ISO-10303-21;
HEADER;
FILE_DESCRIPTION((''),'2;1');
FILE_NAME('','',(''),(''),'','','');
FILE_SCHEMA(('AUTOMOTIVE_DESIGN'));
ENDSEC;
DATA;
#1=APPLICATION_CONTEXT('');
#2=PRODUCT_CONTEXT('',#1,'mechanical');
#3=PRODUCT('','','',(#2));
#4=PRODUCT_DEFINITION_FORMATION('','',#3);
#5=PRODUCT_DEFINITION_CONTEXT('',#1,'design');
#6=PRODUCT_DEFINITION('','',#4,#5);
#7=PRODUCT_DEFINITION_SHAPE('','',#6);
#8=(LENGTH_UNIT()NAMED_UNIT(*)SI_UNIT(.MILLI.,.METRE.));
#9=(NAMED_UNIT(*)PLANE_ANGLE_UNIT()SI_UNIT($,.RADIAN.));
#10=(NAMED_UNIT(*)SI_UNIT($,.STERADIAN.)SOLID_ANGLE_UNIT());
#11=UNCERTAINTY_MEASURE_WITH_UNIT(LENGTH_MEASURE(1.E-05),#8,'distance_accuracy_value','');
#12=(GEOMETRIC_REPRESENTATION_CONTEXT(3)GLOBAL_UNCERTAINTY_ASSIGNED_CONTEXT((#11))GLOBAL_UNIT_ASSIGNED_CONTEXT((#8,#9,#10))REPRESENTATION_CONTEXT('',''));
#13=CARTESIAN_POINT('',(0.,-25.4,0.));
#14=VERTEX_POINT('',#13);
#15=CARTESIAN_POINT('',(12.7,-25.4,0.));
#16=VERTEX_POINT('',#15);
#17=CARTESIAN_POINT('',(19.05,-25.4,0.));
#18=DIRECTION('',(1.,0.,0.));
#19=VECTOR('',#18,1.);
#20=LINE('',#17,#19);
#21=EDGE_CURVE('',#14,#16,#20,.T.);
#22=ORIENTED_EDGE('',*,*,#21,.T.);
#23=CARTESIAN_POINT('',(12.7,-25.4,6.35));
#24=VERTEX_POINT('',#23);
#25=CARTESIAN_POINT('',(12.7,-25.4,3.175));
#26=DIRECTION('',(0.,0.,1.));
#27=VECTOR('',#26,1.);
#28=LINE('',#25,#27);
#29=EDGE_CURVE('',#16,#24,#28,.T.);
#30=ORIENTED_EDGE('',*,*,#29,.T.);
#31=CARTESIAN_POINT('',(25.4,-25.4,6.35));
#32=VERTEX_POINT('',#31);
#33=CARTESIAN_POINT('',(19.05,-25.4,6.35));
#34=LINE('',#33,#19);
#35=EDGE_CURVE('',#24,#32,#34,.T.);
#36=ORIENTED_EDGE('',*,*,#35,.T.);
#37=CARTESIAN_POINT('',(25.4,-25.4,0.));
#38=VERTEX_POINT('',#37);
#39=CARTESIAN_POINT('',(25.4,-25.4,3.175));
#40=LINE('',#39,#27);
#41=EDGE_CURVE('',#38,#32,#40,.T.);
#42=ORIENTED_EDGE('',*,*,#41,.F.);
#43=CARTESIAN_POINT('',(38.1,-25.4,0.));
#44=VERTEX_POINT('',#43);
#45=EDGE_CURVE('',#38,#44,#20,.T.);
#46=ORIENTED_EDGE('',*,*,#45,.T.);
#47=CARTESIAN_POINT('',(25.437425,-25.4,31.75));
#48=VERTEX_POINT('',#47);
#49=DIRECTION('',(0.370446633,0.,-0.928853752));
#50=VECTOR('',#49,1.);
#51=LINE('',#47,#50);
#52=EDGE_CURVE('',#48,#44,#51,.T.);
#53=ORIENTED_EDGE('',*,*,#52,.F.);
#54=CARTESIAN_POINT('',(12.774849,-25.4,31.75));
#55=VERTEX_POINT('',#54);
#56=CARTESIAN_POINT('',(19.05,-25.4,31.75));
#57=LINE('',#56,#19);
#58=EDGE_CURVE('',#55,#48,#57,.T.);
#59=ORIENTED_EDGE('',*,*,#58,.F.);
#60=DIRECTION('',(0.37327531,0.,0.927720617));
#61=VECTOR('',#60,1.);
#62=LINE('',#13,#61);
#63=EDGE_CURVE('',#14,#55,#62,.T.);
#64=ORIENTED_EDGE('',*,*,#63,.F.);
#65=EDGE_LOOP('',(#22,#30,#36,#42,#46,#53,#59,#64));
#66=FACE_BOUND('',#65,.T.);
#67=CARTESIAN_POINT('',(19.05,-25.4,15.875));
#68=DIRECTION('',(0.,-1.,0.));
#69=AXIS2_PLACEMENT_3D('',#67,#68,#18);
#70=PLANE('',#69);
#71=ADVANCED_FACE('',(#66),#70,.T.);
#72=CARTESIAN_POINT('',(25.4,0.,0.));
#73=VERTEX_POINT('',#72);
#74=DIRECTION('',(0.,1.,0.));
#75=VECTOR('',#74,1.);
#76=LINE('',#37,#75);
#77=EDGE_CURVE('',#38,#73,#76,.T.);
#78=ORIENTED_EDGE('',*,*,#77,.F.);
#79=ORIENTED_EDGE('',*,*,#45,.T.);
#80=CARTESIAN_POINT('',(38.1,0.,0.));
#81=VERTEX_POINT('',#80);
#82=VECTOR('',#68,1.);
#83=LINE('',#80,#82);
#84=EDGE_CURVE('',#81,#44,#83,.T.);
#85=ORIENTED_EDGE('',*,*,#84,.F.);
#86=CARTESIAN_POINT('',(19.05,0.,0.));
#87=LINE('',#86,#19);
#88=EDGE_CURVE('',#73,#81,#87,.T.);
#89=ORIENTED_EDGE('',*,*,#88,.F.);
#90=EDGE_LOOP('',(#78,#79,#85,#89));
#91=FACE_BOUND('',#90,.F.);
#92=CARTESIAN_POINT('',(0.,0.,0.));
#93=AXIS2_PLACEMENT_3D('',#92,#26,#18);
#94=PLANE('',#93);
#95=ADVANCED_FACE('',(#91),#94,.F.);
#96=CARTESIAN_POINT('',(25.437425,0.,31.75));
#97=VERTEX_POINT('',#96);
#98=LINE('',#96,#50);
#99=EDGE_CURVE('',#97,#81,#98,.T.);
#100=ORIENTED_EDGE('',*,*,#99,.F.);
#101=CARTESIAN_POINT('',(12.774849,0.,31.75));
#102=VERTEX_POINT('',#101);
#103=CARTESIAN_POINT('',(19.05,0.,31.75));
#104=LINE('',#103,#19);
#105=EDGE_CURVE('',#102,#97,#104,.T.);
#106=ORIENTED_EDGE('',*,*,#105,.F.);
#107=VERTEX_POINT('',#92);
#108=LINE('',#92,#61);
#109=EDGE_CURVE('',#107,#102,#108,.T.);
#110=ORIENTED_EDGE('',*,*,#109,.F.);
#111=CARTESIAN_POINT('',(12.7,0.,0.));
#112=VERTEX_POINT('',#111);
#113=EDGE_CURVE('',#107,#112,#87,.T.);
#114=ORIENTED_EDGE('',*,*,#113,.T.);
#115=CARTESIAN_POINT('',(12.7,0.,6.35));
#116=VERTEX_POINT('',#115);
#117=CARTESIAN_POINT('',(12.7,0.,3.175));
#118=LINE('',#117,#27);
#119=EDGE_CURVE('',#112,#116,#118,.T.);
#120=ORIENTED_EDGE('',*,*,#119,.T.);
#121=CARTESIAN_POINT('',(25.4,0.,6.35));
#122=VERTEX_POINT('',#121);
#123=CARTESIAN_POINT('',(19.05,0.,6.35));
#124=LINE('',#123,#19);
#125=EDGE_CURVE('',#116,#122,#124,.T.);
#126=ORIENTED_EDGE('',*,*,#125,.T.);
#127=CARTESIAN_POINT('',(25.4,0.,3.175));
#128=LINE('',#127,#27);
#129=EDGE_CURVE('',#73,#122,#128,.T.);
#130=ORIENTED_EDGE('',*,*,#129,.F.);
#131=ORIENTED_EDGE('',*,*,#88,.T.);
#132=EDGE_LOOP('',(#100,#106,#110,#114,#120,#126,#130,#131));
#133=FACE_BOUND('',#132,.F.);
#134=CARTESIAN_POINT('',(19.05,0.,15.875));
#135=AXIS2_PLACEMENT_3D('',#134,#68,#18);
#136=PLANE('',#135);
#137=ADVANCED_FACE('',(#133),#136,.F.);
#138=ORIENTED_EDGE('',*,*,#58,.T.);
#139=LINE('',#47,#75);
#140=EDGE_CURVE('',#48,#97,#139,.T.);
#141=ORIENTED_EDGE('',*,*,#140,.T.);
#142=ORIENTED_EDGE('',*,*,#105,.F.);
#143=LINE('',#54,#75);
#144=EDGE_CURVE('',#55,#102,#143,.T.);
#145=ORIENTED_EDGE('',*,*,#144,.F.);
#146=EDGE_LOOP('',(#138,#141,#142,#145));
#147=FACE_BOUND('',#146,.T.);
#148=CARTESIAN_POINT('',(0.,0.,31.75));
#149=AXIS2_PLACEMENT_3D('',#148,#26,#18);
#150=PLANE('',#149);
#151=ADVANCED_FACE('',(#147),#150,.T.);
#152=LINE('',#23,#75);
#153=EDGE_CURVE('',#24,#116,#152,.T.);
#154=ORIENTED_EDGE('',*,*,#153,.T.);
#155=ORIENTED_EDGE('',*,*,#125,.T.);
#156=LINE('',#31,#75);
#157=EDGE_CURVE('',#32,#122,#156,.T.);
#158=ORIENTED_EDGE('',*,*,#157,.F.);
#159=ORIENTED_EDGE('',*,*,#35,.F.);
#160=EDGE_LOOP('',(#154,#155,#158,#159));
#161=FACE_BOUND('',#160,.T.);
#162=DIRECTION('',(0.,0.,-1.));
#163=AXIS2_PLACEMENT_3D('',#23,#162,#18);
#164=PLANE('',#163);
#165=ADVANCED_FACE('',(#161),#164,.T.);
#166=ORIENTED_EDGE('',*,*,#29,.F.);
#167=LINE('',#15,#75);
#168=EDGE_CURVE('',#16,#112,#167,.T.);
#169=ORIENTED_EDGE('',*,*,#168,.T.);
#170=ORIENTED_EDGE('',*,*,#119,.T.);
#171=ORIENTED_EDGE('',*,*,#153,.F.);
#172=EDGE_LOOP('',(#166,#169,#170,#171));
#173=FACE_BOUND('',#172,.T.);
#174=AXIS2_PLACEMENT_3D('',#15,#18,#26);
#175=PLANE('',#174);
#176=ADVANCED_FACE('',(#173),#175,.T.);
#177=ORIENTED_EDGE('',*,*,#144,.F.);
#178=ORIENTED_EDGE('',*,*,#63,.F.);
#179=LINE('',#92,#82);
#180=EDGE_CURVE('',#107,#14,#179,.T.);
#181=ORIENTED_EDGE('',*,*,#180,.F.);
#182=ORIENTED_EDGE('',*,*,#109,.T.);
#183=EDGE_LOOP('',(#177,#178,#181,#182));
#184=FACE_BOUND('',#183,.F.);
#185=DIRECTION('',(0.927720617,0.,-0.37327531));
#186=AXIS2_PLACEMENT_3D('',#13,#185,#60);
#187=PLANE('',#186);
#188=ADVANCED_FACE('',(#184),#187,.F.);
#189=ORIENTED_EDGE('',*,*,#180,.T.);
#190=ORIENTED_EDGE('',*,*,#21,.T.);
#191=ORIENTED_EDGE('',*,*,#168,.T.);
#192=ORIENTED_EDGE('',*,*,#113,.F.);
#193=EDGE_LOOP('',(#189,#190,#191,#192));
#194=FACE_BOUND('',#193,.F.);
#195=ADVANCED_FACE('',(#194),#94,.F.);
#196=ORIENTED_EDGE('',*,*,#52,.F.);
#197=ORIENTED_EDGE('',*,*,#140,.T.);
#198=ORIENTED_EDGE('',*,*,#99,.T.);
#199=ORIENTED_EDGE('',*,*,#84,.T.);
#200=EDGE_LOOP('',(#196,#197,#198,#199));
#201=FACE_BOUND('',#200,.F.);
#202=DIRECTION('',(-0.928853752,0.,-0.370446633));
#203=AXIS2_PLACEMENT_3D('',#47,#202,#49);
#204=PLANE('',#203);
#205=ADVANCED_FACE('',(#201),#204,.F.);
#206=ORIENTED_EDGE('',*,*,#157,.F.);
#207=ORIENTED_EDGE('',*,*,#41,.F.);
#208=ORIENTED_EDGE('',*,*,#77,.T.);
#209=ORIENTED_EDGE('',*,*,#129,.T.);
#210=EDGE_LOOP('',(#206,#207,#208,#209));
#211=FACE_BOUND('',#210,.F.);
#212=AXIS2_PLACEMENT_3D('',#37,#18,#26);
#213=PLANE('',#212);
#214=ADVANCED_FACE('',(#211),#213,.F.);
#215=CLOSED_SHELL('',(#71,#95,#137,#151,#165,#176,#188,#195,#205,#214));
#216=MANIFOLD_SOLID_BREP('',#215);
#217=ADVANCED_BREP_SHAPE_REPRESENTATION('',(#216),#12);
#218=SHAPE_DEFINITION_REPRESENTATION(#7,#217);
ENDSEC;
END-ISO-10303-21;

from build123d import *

# Parameters (mm, degrees)
F0_W      = 38.1
F0_H      = 31.75
F2_DEPTH  = 25.4
F7_W      = 12.7
F7_H      = 6.35
F8_DEPTH  = 25.4
F10_DEPTH = 25.4
F12_DEPTH = 25.4


# Not quite as in the source:
# - the program builds the solid bodies; features that only make, move or delete a surface that nothing else refers to are left out


with BuildPart() as f2:
    # F0 (on Front) → F2 (new body)
    with BuildSketch(Plane.XZ):
        with Locations((19.05, 15.875)):
            Rectangle(F0_W, F0_H)
    extrude(amount=F2_DEPTH)

    # F7 (on face) → F8 (cut)
    with BuildSketch(Plane.XZ.offset(25.4)):
        with Locations((19.05, 3.175)):
            Rectangle(F7_W, F7_H)
    extrude(amount=-F8_DEPTH, mode=Mode.SUBTRACT)

    # F9 (on face) → F10 (cut)
    with BuildSketch(Plane.XZ.offset(25.4)):
        Polygon((0, 31.75), (0, 0), (12.7748493105, 31.75), align=None)
    extrude(amount=-F10_DEPTH, mode=Mode.SUBTRACT)

    # F11 (on face) → F12 (cut)
    with BuildSketch(Plane.XZ.offset(25.4)):
        Polygon((25.4374246553, 31.75), (38.1, 0), (38.1, 31.75), align=None)
    extrude(amount=-F12_DEPTH, mode=Mode.SUBTRACT)


solid = f2.part
